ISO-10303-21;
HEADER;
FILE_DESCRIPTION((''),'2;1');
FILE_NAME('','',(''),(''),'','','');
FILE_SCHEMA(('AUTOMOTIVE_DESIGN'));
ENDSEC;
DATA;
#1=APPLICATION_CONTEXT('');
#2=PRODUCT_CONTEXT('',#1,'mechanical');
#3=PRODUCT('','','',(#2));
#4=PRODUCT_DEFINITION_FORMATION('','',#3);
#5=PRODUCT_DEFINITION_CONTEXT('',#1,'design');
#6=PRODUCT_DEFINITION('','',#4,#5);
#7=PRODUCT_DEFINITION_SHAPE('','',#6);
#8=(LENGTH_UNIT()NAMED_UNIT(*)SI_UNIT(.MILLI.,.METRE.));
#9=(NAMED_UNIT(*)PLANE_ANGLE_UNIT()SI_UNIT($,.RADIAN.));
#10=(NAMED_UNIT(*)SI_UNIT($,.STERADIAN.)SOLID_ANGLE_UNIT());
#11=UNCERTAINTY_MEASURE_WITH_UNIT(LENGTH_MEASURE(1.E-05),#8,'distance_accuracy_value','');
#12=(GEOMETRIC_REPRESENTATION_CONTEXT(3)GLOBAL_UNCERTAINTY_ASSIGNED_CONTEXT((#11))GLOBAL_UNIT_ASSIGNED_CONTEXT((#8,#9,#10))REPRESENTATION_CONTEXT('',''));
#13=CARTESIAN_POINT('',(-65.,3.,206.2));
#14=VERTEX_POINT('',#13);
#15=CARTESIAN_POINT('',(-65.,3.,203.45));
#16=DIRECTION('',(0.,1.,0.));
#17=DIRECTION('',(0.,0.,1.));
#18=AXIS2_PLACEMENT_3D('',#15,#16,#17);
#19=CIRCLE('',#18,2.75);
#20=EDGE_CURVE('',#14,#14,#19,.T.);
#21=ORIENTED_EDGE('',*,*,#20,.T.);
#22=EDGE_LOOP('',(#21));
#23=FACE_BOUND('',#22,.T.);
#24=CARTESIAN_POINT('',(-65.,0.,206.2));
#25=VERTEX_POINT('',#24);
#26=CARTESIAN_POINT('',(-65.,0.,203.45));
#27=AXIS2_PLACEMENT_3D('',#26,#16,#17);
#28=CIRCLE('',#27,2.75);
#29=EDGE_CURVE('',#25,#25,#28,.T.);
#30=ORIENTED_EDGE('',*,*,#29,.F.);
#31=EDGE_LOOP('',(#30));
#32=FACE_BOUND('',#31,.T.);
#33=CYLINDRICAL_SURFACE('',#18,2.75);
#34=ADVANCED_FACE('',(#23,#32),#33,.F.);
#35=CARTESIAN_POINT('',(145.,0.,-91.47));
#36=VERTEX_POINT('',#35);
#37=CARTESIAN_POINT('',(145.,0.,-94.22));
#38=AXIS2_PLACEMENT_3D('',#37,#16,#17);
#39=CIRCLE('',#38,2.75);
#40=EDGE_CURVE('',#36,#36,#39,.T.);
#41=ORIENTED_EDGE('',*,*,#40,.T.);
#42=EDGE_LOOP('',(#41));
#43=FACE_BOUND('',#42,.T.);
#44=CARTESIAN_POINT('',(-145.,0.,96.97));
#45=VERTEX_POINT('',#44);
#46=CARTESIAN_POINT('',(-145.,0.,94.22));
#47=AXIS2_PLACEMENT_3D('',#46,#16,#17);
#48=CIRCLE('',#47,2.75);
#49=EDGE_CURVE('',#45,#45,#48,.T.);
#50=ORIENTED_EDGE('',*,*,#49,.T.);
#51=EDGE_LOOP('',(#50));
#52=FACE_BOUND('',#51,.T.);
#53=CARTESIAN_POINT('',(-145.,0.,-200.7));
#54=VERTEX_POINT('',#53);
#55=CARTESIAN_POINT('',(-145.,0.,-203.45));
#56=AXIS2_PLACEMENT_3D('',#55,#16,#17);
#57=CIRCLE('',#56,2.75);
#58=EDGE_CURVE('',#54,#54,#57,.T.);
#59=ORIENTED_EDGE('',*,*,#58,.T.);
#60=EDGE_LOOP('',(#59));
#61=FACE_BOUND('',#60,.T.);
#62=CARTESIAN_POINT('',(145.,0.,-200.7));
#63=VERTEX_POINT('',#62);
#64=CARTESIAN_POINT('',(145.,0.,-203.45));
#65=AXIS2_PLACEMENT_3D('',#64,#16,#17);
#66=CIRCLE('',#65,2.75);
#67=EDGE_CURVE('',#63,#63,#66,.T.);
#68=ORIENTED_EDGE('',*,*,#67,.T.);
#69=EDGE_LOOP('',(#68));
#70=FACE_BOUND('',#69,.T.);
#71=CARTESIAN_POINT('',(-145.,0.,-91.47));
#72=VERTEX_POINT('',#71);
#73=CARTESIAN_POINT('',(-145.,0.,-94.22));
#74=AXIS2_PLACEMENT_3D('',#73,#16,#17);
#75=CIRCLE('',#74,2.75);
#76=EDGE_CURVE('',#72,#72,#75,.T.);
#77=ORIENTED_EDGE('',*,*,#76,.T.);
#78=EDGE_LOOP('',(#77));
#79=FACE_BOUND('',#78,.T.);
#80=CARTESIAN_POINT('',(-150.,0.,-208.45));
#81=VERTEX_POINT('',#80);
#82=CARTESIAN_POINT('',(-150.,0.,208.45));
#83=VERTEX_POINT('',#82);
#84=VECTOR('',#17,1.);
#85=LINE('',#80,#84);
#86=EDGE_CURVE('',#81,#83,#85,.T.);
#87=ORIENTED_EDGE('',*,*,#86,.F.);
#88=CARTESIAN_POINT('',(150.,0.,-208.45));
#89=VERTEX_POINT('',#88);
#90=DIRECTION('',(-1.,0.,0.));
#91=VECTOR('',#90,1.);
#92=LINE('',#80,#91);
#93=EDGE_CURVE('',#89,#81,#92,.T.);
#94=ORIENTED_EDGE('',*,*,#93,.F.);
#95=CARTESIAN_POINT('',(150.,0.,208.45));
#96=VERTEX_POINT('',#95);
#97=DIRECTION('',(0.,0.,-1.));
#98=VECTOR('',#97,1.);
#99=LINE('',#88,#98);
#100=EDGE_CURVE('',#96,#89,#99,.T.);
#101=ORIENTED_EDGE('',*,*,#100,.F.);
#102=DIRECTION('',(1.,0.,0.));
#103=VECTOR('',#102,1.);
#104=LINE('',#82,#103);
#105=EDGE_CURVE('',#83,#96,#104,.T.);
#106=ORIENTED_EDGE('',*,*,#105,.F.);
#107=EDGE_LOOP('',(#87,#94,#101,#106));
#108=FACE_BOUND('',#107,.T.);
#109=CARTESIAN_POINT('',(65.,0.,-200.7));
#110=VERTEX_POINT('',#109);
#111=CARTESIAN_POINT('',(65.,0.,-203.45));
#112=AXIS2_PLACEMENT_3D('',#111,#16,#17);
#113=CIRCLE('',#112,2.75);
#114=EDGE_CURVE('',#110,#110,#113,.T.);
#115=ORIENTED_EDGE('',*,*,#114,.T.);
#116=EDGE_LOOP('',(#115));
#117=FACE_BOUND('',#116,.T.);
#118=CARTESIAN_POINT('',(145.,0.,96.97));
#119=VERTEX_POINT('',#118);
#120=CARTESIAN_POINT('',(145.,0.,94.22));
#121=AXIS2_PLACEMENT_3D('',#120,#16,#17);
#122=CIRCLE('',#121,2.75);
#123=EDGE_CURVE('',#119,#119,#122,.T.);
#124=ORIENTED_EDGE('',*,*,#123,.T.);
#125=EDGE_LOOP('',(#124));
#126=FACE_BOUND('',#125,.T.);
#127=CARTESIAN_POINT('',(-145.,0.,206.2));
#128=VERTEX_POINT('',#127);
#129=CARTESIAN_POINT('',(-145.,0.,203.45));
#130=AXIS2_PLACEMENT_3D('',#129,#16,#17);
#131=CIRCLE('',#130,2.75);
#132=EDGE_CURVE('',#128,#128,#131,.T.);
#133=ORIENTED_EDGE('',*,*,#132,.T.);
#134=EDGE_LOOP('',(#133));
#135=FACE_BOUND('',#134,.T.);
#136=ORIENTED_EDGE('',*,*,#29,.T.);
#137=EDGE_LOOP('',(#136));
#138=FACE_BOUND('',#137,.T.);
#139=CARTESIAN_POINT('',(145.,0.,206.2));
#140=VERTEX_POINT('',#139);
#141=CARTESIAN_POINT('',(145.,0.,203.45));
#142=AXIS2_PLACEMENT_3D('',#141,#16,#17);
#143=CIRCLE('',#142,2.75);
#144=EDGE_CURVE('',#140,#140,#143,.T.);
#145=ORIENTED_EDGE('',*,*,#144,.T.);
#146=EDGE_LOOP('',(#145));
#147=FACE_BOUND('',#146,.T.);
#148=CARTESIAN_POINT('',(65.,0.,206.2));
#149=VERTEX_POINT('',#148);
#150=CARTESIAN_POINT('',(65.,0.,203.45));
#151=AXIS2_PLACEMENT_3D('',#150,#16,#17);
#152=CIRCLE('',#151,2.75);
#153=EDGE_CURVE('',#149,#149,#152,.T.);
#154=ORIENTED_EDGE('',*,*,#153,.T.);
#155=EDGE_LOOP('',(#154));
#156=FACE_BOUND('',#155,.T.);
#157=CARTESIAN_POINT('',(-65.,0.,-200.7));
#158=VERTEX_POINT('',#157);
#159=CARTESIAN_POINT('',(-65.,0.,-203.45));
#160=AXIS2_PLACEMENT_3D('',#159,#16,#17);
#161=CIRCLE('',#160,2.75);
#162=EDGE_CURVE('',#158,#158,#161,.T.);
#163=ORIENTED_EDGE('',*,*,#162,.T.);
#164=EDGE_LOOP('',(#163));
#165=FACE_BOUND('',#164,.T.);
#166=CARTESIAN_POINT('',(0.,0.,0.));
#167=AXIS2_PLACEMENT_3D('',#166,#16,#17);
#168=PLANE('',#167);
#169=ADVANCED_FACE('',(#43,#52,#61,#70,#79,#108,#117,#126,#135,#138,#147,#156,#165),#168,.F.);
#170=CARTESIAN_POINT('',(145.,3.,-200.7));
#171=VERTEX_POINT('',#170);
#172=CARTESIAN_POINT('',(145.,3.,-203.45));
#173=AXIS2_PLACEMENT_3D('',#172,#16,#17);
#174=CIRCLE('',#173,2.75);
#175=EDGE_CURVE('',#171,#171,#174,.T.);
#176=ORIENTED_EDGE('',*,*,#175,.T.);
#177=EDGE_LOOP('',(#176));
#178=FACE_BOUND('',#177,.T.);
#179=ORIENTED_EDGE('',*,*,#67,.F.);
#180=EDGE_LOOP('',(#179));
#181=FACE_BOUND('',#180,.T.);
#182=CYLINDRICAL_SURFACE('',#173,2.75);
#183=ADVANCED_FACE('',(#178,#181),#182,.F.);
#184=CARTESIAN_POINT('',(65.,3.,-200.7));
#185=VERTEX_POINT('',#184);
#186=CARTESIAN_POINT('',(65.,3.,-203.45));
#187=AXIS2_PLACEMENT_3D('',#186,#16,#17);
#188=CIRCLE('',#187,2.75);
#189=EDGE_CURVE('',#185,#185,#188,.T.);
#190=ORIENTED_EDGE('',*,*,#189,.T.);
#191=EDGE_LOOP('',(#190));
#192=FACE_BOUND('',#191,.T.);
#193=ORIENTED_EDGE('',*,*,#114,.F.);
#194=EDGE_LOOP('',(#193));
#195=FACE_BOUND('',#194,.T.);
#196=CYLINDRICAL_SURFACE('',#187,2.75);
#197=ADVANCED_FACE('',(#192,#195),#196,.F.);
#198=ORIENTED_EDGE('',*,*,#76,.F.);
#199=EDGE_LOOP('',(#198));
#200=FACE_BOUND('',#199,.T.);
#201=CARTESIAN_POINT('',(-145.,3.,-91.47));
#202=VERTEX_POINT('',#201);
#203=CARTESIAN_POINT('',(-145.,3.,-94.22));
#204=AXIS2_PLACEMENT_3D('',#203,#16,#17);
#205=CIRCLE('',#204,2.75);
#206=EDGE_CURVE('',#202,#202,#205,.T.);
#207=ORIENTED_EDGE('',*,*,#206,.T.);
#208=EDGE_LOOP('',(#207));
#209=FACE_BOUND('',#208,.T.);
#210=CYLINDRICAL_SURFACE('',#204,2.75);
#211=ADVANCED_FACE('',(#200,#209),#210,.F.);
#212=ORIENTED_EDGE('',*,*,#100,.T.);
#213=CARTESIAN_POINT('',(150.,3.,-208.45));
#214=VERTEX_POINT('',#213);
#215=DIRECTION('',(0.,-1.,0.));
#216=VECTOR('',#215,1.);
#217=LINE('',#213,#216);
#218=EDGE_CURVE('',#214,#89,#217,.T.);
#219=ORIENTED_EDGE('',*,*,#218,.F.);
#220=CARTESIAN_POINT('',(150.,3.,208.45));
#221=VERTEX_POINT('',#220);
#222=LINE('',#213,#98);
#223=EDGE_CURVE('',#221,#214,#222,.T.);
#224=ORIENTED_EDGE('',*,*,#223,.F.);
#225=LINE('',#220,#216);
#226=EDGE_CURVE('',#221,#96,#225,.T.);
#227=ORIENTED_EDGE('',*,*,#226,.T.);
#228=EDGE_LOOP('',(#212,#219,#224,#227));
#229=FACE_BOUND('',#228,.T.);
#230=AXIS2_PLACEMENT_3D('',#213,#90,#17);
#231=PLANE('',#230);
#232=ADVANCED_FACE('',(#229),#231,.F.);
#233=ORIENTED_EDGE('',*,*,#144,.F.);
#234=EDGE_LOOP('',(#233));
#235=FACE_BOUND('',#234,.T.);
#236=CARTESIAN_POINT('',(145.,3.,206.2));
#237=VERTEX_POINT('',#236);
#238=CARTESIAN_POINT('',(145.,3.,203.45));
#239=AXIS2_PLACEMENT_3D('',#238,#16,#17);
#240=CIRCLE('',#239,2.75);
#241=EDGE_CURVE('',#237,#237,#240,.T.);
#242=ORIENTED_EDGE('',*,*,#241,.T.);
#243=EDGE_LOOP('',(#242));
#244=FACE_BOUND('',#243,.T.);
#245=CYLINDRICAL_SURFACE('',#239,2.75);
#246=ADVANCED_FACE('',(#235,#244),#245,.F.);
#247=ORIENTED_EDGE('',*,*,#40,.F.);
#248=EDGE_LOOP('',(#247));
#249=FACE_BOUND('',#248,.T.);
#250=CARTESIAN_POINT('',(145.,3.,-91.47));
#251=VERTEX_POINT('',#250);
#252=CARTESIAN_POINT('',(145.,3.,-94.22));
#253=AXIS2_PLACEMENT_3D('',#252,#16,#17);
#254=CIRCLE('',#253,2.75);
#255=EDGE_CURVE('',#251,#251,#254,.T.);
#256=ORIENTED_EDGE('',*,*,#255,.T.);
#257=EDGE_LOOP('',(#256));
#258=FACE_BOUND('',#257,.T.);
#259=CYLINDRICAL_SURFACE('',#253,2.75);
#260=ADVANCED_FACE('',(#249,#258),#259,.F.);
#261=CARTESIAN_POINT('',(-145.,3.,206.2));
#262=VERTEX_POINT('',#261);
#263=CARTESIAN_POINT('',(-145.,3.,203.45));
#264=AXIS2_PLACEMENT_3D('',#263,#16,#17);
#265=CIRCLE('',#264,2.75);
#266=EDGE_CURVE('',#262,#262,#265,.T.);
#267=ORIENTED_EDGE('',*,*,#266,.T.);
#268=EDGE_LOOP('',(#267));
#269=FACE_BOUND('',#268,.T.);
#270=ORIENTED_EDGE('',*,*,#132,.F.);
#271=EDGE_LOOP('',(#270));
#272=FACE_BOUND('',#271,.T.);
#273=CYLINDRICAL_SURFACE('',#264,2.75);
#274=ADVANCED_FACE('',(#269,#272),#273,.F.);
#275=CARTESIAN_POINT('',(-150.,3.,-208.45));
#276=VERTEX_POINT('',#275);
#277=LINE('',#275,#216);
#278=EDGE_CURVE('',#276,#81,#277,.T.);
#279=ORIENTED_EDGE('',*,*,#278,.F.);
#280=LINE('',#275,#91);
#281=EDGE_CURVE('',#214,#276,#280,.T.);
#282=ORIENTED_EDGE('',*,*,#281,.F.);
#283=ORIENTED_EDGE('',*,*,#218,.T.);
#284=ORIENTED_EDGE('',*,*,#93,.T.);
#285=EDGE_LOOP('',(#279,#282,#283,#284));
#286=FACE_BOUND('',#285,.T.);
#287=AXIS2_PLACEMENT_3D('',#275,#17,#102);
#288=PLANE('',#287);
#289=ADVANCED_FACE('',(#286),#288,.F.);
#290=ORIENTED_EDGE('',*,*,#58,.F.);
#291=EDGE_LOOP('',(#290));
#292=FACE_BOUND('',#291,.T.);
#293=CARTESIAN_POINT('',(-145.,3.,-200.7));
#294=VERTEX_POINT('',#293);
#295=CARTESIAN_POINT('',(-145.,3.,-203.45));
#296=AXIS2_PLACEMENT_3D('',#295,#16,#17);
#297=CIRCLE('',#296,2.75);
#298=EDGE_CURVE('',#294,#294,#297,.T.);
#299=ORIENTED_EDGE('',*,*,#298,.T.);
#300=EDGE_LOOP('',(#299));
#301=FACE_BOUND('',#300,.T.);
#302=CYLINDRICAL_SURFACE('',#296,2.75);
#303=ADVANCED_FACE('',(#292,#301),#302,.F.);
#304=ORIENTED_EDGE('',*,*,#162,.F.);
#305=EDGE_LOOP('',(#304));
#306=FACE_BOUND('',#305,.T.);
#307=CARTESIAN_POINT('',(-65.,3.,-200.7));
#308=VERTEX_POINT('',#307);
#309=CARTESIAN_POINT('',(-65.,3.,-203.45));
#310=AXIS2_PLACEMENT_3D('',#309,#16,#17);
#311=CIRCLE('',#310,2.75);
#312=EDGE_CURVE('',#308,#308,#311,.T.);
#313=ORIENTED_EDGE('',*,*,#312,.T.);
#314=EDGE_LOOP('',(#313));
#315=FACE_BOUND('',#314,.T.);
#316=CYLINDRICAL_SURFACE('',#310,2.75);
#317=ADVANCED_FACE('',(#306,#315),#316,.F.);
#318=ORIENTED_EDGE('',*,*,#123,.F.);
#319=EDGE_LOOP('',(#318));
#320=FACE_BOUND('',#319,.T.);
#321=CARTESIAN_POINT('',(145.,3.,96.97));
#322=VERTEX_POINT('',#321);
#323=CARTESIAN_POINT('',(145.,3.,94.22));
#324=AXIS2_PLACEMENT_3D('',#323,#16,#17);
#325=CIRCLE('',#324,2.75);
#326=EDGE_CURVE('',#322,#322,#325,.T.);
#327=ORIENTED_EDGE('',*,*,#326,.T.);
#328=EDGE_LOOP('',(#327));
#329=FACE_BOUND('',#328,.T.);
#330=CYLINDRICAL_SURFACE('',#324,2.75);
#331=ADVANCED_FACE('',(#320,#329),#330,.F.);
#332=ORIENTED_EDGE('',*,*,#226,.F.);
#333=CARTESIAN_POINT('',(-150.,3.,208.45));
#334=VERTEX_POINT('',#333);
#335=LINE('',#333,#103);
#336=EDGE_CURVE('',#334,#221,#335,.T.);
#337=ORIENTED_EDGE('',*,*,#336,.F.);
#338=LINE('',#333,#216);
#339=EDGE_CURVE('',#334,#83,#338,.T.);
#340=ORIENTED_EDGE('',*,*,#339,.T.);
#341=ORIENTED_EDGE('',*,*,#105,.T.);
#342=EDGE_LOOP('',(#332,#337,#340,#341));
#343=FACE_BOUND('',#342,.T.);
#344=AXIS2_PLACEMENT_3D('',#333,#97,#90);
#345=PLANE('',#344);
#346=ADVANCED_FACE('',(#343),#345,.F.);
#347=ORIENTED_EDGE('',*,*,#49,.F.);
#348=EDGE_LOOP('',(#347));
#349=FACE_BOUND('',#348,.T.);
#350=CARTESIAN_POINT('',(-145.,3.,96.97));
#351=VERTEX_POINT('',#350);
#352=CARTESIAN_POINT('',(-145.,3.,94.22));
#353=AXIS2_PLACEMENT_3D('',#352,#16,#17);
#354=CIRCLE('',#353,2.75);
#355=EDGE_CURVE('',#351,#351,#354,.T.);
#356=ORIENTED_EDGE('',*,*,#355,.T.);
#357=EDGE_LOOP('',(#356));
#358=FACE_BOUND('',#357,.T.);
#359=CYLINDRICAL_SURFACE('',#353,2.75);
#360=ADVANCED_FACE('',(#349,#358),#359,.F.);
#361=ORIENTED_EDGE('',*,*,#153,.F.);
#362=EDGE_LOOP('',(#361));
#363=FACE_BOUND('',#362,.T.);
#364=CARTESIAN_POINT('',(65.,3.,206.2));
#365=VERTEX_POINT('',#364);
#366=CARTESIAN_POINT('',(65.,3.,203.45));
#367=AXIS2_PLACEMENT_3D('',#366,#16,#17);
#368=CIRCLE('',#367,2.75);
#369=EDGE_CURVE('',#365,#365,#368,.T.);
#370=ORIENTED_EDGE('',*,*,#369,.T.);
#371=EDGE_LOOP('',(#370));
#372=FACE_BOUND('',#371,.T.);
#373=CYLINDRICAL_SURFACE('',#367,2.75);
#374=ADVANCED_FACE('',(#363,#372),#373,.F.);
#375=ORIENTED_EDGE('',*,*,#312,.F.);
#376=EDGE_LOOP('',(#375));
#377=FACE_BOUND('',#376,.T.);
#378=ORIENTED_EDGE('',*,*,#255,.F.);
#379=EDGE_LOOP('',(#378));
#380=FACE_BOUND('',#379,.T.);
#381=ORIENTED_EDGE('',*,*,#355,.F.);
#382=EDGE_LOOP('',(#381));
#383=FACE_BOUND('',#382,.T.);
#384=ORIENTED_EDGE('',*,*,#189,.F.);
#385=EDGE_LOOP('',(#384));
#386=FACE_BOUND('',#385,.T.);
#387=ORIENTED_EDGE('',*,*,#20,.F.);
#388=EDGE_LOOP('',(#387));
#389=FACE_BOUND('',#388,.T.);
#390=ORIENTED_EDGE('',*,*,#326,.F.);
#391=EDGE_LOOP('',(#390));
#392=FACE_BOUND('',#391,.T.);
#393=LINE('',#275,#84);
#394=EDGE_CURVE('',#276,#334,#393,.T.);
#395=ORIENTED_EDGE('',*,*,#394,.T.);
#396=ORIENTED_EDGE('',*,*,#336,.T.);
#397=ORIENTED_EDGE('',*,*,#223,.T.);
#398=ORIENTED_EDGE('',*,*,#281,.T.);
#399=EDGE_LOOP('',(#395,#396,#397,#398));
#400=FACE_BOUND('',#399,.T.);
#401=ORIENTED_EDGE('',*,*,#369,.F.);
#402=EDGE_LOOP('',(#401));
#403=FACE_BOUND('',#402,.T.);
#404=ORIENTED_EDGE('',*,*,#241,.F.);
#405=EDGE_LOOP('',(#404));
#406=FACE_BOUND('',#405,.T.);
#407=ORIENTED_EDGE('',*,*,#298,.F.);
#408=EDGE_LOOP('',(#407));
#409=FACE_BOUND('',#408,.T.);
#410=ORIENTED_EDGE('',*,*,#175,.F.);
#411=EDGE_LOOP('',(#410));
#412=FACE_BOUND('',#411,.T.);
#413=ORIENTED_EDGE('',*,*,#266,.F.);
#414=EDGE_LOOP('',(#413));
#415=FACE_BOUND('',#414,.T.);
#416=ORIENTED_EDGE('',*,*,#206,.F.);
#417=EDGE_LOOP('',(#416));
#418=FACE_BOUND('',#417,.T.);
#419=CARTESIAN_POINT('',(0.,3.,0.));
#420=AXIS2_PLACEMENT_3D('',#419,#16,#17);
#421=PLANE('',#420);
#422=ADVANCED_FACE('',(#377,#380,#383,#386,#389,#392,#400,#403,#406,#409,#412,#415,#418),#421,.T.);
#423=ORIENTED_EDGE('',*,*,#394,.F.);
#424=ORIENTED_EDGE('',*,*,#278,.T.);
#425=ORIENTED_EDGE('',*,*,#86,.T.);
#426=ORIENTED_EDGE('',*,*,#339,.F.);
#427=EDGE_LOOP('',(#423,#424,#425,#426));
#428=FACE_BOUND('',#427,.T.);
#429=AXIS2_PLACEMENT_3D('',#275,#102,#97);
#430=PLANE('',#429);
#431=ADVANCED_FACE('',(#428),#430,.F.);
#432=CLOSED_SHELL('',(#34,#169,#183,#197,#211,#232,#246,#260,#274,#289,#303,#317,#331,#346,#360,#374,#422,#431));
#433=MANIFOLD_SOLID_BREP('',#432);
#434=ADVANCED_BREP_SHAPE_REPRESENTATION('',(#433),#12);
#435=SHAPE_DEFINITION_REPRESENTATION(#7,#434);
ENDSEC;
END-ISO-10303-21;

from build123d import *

# Parameters (mm, degrees)
SKETCH1_W                    = 300
SKETCH1_H                    = 416.9
BOSS_EXTRUDE1_DEPTH          = 3
M5_CLEARANCE_HOLE1_OUTLINE_R = 2.75
M5_CLEARANCE_HOLE1_DEPTH     = 3


# Read off the part's stored shape, not the designer's step: M5 Clearance Hole1
with BuildPart() as part:
    # Sketch1 → Boss-Extrude1 (new body)
    with BuildSketch(Plane(origin=(0, 0, 0), x_dir=(1, 0, 0), z_dir=(0, 1, 0))):
        Rectangle(SKETCH1_W, SKETCH1_H)
    extrude(amount=BOSS_EXTRUDE1_DEPTH)

    # M5 Clearance Hole1 outline → M5 Clearance Hole1 (cut)
    with BuildSketch(Plane(origin=(0, 0, 0), x_dir=(1, 0, 0), z_dir=(0, 1, 0))):
        with Locations((65, -203.45)):
            Circle(M5_CLEARANCE_HOLE1_OUTLINE_R)
        with Locations((-65, -203.45)):
            Circle(M5_CLEARANCE_HOLE1_OUTLINE_R)
        with Locations((145, -94.22)):
            Circle(M5_CLEARANCE_HOLE1_OUTLINE_R)
        with Locations((145, 94.22)):
            Circle(M5_CLEARANCE_HOLE1_OUTLINE_R)
        with Locations((-145, -94.22)):
            Circle(M5_CLEARANCE_HOLE1_OUTLINE_R)
        with Locations((-145, 94.22)):
            Circle(M5_CLEARANCE_HOLE1_OUTLINE_R)
        with Locations((65, 203.45)):
            Circle(M5_CLEARANCE_HOLE1_OUTLINE_R)
        with Locations((-65, 203.45)):
            Circle(M5_CLEARANCE_HOLE1_OUTLINE_R)
        with Locations((145, 203.45)):
            Circle(M5_CLEARANCE_HOLE1_OUTLINE_R)
        with Locations((-145, -203.45)):
            Circle(M5_CLEARANCE_HOLE1_OUTLINE_R)
        with Locations((145, -203.45)):
            Circle(M5_CLEARANCE_HOLE1_OUTLINE_R)
        with Locations((-145, 203.45)):
            Circle(M5_CLEARANCE_HOLE1_OUTLINE_R)
    extrude(amount=M5_CLEARANCE_HOLE1_DEPTH, mode=Mode.SUBTRACT)


solid = part.part
